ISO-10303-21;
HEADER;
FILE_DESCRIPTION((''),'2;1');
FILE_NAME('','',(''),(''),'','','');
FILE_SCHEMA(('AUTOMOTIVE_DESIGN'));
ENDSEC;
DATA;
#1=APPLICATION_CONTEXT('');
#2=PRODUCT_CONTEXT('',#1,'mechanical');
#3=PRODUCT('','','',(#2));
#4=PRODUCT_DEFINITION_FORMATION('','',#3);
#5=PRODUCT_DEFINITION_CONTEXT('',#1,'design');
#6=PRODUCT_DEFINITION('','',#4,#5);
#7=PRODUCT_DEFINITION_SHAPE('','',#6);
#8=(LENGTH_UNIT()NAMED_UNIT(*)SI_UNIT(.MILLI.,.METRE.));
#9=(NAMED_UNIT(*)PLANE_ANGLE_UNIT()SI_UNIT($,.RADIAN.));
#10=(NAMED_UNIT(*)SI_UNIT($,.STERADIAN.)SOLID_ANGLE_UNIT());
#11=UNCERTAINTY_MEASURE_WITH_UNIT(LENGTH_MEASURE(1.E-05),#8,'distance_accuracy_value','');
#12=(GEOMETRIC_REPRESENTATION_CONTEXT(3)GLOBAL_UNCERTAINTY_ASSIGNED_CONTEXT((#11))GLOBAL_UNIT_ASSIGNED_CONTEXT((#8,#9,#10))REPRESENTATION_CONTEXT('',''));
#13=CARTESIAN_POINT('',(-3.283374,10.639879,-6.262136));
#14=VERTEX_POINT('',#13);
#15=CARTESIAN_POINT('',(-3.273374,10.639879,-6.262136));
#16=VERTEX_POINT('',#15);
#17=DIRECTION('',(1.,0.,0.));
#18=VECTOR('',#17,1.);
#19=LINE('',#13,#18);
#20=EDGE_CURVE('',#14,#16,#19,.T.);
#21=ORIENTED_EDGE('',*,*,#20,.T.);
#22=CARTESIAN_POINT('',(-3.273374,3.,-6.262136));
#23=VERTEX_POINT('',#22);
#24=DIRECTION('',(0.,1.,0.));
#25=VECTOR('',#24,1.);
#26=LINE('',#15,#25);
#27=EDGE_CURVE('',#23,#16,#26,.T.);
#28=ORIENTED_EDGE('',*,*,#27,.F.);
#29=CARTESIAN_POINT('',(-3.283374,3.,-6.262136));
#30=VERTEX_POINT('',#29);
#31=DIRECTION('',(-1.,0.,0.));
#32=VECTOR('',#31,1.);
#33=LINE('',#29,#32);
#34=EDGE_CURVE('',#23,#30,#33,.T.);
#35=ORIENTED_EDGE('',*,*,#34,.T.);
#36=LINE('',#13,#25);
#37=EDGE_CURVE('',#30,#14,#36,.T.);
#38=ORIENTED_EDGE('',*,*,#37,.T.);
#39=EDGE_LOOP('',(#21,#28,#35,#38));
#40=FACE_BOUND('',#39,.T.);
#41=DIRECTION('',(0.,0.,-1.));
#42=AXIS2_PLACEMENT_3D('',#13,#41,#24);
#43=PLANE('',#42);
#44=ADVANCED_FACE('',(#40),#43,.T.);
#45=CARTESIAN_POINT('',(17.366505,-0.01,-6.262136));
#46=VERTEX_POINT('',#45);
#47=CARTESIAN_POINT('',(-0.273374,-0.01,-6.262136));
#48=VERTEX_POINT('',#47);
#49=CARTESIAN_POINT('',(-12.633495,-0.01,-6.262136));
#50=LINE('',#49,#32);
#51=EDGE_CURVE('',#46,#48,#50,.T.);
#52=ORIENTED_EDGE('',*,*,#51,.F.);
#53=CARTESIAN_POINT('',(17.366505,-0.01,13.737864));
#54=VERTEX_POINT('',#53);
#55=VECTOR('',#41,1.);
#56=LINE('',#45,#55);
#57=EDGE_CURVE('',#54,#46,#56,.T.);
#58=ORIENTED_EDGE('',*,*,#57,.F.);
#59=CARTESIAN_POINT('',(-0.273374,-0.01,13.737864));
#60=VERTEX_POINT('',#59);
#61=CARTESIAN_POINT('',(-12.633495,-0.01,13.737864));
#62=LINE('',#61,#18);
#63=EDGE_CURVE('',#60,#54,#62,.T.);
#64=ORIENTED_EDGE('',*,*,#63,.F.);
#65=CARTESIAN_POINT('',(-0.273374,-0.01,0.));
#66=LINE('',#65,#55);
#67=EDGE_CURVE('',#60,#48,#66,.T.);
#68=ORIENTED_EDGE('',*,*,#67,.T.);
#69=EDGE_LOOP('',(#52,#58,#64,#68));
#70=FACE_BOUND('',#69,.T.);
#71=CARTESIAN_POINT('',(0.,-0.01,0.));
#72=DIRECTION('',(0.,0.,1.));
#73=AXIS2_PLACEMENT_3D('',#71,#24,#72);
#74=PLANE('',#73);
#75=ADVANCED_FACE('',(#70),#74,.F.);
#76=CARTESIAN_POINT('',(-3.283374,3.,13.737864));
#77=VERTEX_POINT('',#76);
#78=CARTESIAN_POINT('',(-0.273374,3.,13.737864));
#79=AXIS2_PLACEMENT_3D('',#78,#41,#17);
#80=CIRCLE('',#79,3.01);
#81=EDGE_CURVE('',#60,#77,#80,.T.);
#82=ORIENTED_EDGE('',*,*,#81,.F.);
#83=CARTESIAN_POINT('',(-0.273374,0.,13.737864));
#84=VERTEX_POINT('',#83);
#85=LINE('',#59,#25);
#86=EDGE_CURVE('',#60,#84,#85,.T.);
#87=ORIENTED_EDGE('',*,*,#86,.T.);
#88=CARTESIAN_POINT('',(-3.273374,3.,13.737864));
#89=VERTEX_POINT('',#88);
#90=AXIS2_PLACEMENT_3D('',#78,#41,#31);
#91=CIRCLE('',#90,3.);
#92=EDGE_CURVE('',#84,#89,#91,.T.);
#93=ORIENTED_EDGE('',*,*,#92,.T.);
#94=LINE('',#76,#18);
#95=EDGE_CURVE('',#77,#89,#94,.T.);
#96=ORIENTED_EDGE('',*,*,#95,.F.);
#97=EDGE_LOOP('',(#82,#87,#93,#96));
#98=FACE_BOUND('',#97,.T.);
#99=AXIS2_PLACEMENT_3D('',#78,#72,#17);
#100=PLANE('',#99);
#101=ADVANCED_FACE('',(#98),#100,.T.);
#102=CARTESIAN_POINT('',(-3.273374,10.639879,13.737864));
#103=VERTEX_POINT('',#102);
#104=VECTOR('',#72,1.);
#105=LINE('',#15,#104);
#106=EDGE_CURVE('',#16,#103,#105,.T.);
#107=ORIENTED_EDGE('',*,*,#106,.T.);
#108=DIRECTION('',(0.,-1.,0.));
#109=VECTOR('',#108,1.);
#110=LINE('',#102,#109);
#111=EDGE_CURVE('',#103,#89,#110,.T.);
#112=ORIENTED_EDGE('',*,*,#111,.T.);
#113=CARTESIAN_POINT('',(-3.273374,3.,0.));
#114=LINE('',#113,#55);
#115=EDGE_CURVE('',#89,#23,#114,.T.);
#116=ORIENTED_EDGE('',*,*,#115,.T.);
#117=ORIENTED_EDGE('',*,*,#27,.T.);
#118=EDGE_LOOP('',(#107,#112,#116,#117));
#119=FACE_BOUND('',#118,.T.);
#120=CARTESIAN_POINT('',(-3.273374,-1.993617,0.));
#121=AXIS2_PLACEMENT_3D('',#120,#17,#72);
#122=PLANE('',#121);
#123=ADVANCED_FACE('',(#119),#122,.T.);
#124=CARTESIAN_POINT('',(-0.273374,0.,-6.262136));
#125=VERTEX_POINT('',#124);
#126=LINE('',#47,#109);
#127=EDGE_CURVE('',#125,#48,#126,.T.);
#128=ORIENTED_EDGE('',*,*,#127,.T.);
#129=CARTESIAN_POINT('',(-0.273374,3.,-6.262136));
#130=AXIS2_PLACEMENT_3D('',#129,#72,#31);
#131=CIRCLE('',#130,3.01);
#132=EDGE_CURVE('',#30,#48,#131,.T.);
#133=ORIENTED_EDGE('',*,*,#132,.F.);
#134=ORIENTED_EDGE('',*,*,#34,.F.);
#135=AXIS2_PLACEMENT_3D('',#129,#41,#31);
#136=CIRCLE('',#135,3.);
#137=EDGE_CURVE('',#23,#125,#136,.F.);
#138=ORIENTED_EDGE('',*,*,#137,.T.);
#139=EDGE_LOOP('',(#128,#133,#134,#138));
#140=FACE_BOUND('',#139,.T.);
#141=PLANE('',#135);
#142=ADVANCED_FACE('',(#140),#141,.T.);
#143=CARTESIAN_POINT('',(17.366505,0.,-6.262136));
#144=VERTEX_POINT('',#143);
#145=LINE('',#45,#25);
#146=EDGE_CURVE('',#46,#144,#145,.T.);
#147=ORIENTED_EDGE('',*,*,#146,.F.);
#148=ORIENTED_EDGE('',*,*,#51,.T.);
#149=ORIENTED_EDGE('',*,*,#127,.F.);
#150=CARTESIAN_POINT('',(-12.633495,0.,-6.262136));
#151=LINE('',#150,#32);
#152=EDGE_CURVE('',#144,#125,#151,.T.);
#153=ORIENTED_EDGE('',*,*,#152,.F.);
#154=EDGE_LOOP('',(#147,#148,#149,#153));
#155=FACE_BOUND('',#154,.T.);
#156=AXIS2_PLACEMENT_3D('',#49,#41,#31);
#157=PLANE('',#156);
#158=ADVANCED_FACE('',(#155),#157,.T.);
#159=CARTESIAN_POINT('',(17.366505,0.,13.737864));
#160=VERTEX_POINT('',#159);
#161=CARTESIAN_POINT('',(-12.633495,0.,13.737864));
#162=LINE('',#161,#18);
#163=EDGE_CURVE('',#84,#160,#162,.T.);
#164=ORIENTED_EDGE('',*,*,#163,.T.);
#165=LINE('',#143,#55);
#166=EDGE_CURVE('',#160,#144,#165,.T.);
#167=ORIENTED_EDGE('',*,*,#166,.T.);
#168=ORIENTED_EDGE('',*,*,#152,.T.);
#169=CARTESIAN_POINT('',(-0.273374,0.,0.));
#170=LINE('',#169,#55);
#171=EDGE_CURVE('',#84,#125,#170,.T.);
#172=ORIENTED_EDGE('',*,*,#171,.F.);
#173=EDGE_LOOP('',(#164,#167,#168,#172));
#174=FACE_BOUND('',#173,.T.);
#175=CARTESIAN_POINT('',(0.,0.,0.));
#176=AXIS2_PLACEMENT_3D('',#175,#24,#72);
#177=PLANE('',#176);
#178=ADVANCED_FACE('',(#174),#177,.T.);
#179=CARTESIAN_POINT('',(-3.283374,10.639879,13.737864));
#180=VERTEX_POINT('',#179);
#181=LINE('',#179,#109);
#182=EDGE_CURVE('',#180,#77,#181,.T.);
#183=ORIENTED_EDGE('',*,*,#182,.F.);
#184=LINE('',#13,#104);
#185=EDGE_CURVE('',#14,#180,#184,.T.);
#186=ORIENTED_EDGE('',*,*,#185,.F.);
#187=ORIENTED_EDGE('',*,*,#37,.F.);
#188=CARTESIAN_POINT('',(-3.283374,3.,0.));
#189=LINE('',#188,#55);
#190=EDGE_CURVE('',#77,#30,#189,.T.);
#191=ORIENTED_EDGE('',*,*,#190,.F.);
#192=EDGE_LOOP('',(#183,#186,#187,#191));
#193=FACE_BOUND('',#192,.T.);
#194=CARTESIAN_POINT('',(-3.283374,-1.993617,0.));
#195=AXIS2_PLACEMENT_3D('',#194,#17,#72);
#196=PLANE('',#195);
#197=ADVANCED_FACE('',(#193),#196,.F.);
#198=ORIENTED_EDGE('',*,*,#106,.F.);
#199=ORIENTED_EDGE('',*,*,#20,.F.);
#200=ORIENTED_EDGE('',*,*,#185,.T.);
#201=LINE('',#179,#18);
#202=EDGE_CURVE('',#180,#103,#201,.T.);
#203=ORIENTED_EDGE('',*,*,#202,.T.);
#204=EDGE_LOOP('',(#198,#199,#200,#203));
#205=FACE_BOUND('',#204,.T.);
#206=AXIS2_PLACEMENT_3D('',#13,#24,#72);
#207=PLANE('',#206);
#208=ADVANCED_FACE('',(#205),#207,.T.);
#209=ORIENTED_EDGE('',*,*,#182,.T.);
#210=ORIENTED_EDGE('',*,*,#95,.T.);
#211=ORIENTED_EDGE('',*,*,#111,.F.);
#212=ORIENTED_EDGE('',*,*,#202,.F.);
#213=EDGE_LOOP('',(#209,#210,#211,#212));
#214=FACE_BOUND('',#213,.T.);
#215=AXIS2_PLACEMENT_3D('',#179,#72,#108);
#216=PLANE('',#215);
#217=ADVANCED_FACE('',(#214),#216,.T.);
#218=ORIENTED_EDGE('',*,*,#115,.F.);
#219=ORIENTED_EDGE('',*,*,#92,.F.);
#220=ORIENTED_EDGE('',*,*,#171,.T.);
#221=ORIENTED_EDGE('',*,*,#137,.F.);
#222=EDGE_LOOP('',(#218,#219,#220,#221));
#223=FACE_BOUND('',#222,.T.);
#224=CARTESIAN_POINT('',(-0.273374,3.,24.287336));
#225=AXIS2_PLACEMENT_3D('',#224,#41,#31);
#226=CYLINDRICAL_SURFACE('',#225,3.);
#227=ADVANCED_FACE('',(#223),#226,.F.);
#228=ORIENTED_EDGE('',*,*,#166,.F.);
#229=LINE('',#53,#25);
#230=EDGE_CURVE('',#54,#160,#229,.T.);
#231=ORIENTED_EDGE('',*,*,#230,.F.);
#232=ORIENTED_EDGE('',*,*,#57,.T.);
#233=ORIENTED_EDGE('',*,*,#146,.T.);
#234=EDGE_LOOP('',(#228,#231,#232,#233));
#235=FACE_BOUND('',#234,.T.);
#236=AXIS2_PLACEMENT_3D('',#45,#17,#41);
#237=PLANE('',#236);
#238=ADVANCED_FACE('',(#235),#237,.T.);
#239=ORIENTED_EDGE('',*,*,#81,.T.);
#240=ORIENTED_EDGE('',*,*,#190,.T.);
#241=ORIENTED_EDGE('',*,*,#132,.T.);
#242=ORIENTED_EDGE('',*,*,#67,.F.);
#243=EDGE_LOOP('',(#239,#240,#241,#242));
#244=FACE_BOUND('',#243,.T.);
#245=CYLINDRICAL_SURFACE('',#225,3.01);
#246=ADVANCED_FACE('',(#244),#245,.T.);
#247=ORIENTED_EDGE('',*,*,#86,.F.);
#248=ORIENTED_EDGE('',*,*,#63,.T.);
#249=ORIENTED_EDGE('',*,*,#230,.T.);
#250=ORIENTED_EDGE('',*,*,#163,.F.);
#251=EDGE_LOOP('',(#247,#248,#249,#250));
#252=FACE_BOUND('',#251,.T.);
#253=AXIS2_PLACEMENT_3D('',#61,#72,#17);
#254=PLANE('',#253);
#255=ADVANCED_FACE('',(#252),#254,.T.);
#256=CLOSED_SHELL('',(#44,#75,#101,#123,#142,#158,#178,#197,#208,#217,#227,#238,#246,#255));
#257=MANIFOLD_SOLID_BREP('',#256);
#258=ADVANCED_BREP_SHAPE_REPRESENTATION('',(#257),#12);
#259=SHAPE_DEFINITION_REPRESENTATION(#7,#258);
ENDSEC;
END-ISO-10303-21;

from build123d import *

# Parameters (mm, degrees)
SKETCH1_W              = 30
SKETCH1_H              = 20
BASE_FLANGE1_DEPTH     = 0.01
SKETCHED_START         = -6.262135922
SKETCHED_BEND1_DEPTH   = 20
SKETCHED_BEND1_2_DEPTH = 20


# Read off the part's stored shape, not the designer's step: Sketched Bend1
# Sheet-metal steps are written as plain solids
with BuildPart() as part:
    # Sketch1 → Base-Flange1 (new body)
    with BuildSketch(Plane(origin=(0, 0, 0), x_dir=(1, 0, 0), z_dir=(0, 1, 0))):
        with Locations((2.366504854, -3.737864078)):
            Rectangle(SKETCH1_W, SKETCH1_H)
    extrude(amount=-BASE_FLANGE1_DEPTH)

    # Sketched Bend1 outline → Sketched Bend1 (cut)
    with BuildSketch(Plane.XY.offset(SKETCHED_START)):
        with BuildLine():
            ThreePointArc((-0.273373665, -0.01), (-0.396052106, -0.007498961), (-0.518526677, 0))
            Line((-0.518526677, 0), (-12.633495146, 0))
            Line((-12.633495146, 0), (-12.633495146, -0.01))
            Line((-12.633495146, -0.01), (-0.273373665, -0.01))
        make_face()
    extrude(amount=SKETCHED_BEND1_DEPTH, mode=Mode.SUBTRACT)

    # Sketched Bend1 2 outline → Sketched Bend1 2 (add)
    with BuildSketch(Plane.XY.offset(SKETCHED_START)):
        with BuildLine():
            ThreePointArc((-0.273373665, 0), (-2.394694009, 0.878679657), (-3.273373665, 3))
            Line((-3.273373665, 3), (-3.273373665, 10.639878519))
            Line((-3.273373665, 10.639878519), (-3.283373665, 10.639878519))
            Line((-3.283373665, 10.639878519), (-3.283373665, 3))
            ThreePointArc((-3.283373665, 3), (-2.486743332, 0.960123848), (-0.518526677, 0))
            Line((-0.518526677, 0), (-0.273373665, 0))
        make_face()
    extrude(amount=SKETCHED_BEND1_2_DEPTH)


solid = part.part
